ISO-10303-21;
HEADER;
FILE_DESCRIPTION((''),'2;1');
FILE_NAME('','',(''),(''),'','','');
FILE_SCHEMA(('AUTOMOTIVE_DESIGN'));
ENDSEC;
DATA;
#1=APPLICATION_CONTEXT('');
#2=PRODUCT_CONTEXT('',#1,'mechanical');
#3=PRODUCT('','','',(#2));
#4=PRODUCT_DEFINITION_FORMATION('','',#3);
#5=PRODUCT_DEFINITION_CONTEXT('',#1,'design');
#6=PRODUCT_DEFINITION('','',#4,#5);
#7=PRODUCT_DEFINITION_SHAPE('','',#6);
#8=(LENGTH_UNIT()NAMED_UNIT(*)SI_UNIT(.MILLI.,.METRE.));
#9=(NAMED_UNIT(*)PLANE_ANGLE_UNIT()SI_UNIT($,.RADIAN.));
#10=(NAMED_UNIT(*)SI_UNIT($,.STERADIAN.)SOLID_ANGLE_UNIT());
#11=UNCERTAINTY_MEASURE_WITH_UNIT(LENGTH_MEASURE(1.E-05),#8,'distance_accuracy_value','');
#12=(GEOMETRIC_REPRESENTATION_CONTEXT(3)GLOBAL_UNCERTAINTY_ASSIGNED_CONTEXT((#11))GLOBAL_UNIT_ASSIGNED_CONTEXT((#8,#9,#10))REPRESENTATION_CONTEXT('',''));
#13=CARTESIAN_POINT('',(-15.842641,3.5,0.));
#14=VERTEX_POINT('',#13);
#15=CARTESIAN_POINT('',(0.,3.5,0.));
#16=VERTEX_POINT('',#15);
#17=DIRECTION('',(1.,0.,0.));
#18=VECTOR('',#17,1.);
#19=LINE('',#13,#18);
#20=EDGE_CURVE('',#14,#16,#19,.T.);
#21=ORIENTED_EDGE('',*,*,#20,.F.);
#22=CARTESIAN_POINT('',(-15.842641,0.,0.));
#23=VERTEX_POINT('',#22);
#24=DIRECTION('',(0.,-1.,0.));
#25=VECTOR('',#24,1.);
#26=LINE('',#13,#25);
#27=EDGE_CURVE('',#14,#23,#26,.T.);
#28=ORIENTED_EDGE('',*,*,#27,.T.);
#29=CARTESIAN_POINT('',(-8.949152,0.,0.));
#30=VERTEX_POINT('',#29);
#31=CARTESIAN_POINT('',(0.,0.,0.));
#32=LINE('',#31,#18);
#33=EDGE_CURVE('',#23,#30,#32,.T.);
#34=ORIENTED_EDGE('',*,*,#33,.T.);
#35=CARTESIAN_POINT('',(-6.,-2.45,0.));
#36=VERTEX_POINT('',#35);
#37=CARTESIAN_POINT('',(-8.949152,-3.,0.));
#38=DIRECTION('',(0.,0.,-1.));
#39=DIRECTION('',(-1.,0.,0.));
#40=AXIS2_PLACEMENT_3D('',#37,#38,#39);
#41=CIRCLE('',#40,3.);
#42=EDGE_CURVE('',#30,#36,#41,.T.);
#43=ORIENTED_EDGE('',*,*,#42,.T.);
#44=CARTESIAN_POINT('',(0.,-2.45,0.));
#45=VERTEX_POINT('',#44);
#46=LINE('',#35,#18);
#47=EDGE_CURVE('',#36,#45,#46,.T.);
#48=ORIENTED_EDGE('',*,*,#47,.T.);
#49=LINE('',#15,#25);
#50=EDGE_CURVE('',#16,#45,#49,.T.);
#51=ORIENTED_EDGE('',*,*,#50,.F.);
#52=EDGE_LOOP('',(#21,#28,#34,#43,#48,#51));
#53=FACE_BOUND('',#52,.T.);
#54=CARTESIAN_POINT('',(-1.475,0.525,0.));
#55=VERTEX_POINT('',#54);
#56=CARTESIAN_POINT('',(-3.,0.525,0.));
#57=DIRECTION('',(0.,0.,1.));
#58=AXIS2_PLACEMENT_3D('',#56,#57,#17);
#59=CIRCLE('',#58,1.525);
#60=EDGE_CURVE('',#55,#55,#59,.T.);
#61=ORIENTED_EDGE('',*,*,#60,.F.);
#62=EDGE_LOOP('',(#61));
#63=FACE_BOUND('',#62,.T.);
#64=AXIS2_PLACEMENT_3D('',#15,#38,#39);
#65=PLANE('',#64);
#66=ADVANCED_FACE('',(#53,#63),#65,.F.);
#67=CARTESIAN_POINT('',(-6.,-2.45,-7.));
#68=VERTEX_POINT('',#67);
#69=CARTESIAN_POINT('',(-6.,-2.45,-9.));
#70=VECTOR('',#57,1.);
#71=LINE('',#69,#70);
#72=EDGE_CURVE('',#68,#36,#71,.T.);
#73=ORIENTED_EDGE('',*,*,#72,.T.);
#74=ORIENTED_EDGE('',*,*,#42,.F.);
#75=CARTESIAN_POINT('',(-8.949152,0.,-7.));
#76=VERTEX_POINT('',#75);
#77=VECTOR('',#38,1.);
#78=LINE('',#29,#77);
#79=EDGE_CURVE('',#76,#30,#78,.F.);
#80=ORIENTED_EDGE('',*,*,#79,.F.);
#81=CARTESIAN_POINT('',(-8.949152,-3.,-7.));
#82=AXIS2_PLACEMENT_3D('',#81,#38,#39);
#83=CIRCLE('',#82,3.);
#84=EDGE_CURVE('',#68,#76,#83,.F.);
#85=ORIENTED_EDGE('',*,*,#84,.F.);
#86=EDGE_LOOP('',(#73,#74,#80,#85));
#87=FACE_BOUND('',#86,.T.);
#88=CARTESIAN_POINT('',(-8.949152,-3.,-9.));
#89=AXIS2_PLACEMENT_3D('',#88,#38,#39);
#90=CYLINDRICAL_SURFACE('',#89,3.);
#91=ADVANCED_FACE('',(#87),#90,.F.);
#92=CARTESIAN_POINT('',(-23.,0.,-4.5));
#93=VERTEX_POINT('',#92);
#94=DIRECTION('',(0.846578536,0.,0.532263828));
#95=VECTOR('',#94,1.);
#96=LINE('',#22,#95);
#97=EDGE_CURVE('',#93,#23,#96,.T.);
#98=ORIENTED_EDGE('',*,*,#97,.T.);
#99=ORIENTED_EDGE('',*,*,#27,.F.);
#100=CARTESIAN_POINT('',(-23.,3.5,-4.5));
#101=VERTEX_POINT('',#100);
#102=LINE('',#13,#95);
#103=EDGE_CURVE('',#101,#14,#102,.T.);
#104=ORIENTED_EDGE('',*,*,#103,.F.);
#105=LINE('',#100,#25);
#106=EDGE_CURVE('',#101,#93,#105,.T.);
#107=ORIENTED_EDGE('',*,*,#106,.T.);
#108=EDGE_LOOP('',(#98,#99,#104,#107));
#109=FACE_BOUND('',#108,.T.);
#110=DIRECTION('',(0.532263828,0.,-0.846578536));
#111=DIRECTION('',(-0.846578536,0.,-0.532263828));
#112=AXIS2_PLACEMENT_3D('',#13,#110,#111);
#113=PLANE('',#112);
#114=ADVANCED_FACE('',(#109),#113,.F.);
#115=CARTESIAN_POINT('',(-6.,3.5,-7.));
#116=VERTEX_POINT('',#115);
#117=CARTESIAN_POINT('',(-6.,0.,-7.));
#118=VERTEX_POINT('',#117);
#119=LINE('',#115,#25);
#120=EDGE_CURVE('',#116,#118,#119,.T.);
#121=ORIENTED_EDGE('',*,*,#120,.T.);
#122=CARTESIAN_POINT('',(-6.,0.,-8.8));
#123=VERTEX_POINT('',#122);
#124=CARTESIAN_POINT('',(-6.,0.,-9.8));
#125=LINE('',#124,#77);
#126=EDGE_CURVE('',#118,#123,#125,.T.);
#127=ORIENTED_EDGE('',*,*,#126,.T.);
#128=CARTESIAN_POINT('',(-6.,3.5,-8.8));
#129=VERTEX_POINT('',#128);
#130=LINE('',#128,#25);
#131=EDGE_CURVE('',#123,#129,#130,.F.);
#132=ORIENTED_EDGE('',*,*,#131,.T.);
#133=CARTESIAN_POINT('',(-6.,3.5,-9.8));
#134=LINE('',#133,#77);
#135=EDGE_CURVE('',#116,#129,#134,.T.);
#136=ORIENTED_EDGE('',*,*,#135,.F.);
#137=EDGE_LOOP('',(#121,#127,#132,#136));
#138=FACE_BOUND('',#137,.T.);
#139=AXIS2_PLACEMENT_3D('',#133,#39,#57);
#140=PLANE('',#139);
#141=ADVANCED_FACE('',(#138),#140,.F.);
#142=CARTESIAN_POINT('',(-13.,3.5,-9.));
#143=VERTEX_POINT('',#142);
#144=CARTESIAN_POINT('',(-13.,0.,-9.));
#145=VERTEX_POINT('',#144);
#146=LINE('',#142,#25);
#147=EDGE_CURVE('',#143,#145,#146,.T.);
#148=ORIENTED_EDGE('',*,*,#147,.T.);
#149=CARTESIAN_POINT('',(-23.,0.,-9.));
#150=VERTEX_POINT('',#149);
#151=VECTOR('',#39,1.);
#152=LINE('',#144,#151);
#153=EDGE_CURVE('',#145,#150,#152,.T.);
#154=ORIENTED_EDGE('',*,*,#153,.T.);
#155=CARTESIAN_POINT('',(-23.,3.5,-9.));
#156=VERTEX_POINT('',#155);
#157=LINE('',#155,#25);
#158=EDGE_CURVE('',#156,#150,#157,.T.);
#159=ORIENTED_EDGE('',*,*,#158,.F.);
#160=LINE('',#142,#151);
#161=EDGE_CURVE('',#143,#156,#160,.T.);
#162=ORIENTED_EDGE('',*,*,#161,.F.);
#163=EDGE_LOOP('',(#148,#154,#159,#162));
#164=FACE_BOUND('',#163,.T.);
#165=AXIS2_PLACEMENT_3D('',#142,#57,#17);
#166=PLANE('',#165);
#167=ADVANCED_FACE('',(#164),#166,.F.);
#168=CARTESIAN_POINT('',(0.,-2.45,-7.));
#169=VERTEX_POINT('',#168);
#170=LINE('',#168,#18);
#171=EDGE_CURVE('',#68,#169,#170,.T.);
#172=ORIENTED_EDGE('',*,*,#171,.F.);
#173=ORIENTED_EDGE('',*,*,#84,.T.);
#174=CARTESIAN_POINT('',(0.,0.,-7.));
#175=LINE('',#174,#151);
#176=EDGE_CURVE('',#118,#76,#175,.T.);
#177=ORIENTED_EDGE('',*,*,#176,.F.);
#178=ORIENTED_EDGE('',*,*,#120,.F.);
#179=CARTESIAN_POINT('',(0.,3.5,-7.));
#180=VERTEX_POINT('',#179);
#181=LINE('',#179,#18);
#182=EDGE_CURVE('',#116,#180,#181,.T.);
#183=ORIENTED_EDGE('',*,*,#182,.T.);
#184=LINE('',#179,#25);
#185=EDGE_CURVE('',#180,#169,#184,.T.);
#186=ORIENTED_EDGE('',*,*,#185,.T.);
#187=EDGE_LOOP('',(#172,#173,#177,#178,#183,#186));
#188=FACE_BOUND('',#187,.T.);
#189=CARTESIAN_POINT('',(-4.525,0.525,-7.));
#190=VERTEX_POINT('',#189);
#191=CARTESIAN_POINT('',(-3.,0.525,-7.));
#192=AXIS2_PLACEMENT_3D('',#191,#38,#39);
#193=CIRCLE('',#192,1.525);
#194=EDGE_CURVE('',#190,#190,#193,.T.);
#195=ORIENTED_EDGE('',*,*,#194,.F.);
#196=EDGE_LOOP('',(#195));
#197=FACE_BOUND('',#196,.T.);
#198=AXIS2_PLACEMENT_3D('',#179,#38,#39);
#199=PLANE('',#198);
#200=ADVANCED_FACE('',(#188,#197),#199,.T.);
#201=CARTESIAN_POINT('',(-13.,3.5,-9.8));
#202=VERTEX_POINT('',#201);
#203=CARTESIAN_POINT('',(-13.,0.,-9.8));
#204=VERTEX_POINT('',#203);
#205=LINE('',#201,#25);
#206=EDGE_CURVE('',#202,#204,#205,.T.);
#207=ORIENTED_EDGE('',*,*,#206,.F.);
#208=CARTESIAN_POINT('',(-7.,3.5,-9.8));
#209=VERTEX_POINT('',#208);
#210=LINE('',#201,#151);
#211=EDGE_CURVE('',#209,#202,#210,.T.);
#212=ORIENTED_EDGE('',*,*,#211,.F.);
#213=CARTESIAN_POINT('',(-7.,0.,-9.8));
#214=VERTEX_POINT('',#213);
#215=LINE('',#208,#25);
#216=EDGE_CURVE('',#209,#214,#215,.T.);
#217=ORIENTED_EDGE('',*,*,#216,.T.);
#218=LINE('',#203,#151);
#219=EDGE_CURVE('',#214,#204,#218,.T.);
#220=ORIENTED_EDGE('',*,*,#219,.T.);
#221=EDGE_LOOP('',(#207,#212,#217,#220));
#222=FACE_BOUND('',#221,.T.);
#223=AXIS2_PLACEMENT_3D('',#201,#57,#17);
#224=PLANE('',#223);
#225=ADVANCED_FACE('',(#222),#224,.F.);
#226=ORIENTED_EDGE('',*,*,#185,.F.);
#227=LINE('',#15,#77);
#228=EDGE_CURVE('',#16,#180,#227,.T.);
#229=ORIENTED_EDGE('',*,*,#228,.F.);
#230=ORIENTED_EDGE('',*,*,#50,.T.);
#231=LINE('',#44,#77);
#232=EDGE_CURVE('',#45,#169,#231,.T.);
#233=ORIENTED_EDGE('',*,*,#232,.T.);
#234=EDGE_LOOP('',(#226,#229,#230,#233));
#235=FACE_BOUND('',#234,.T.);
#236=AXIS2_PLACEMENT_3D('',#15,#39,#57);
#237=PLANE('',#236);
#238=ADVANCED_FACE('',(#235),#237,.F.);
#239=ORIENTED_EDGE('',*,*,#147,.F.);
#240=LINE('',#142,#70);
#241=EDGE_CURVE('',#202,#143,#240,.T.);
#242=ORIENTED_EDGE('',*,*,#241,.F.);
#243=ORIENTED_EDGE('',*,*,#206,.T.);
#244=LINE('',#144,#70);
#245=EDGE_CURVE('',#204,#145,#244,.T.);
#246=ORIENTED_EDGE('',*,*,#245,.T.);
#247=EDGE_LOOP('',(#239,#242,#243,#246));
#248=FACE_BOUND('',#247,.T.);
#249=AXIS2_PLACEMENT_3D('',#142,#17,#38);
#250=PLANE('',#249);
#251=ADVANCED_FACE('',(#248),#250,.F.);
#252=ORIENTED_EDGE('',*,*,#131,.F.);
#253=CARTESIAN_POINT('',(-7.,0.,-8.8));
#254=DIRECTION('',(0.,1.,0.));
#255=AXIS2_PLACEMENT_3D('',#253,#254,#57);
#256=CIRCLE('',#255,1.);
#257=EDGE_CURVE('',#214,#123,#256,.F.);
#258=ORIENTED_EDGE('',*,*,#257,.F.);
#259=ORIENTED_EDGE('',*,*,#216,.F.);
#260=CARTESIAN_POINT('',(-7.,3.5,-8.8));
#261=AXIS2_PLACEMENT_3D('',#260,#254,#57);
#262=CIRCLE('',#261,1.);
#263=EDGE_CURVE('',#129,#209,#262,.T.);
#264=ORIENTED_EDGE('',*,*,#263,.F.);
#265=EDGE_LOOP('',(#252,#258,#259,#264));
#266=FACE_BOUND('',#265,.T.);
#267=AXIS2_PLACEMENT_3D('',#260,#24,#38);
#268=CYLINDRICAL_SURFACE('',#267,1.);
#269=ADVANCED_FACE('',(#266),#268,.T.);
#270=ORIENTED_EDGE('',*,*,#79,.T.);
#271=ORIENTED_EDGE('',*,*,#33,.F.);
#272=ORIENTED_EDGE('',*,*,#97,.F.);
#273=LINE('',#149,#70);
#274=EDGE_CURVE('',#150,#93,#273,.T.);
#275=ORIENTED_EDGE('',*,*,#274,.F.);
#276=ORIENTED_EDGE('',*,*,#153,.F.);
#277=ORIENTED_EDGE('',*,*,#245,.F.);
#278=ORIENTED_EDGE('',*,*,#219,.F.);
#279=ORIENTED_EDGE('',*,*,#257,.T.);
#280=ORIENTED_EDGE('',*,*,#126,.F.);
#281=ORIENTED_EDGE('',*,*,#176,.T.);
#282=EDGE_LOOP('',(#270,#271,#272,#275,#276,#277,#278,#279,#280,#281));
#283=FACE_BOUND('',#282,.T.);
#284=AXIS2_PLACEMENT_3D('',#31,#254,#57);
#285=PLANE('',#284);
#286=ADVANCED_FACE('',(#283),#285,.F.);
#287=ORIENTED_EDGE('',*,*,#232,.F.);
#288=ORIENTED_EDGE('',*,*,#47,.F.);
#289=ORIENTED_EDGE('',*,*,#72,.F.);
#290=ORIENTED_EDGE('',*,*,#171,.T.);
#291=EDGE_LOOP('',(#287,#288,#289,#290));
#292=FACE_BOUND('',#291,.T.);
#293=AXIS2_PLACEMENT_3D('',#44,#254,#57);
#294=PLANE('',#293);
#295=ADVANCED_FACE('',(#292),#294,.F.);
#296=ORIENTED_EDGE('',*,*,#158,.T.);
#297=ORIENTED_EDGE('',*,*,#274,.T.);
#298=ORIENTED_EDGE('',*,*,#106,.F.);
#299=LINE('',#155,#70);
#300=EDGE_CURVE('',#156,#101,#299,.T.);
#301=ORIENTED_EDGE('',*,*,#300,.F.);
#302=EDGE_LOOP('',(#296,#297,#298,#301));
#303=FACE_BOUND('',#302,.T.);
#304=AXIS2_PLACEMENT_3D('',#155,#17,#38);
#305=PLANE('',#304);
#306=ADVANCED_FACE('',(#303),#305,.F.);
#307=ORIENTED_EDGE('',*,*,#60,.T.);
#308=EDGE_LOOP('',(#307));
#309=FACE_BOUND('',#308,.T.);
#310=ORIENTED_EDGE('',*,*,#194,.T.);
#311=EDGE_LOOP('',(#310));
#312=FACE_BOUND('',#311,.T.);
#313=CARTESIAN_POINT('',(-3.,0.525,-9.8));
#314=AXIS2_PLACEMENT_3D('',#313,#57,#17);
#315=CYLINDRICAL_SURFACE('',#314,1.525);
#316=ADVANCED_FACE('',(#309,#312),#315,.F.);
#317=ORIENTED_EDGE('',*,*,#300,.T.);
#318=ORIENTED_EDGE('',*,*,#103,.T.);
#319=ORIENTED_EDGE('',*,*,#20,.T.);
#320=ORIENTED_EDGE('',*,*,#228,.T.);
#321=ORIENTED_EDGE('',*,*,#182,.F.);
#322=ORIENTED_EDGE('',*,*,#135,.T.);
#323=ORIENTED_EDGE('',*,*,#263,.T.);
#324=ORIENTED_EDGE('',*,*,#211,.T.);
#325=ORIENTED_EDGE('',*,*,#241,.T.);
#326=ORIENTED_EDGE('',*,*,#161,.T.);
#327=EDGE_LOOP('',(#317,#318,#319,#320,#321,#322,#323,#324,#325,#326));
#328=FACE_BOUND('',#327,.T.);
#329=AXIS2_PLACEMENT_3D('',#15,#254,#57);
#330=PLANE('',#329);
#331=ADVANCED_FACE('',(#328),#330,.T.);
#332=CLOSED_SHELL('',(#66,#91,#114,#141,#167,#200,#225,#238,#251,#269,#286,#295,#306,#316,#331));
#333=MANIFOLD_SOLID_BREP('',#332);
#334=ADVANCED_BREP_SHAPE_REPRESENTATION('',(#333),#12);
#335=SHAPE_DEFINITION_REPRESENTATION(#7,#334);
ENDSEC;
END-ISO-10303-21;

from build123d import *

# Parameters (mm, degrees)
EXTRUDE_1_DEPTH          = 3.5
EXTRUDE_2_DEPTH          = 3.5
EXTRUDE_2_DEPTH_BACK     = 2.45
SKETCH_3_W               = 6
SKETCH_3_H               = 9
CUT_EXTRUDE_1_DEPTH      = 26.244603384
CUT_EXTRUDE_1_DEPTH_BACK = 26.244603384
SKETCH_4_W               = 6
SKETCH_4_H               = 2
SKETCH_5_R               = 1.525
CUT_EXTRUDE_2_DEPTH      = 26.244603384
FILLET_2_R               = 1
FILLET_3_R               = 3


with BuildPart() as part:
    # 草图1 → 凸台-拉伸1 (new body)
    with BuildSketch(Plane(origin=(0, 0, 0), x_dir=(1, 0, 0), z_dir=(0, 1, 0))):
        Polygon((0, 0), (-6, 0), (-15.842640781, 0), (-23, 4.5), (-23, 9), (-13, 9), (-13, 9.8), (-6, 9.8), (-6, 9), (0, 9), align=None)
    extrude(amount=EXTRUDE_1_DEPTH)

    # 草图3 → 凸台-拉伸2 (add, two sides: drawn at the far end of the back side and taken through both)
    with BuildSketch(Plane(origin=(0, 0, 0), x_dir=(1, 0, 0), z_dir=(0, 1, 0)).offset(-EXTRUDE_2_DEPTH_BACK)):
        with Locations((-3, 4.5)):
            Rectangle(SKETCH_3_W, SKETCH_3_H)
    extrude(amount=EXTRUDE_2_DEPTH + EXTRUDE_2_DEPTH_BACK)

    # 草图4 → 切除-拉伸1 (cut, two sides: drawn at the far end of the back side and taken through both)
    with BuildSketch(Plane(origin=(0, 0, 0), x_dir=(1, 0, 0), z_dir=(0, 1, 0)).offset(-CUT_EXTRUDE_1_DEPTH_BACK)):
        with Locations((-3, 8)):
            Rectangle(SKETCH_4_W, SKETCH_4_H)
    extrude(amount=CUT_EXTRUDE_1_DEPTH + CUT_EXTRUDE_1_DEPTH_BACK, mode=Mode.SUBTRACT)

    # 草图5 → 切除-拉伸2 (cut, through all)
    with BuildSketch(Plane.XY):
        with Locations((-3, 0.525)):
            Circle(SKETCH_5_R)
    extrude(amount=-CUT_EXTRUDE_2_DEPTH, mode=Mode.SUBTRACT)

    # 圆角2
    fillet_2_edges = [part.edges().sort_by_distance(p)[0] for p in [
        (-6, 1.75, -9.8),
    ]]
    fillet(fillet_2_edges, radius=FILLET_2_R)

    # 圆角3
    # the kernel refuses this fillet: 3 mm, written as the material it adds along each edge
    with BuildSketch(Plane(origin=(-6, 0, -7), x_dir=(-1, 0, 0), z_dir=(0, 0, 1))) as fillet_3_piece_1:
        with BuildLine():
            CenterArc((2.949152421, 3), FILLET_3_R, 190.563977589, 79.436022411)
            Line((0, 2.45), (0, 0))
            Line((0, 0), (2.949152421, 0))
        make_face()
    extrude(amount=7)


solid = part.part
